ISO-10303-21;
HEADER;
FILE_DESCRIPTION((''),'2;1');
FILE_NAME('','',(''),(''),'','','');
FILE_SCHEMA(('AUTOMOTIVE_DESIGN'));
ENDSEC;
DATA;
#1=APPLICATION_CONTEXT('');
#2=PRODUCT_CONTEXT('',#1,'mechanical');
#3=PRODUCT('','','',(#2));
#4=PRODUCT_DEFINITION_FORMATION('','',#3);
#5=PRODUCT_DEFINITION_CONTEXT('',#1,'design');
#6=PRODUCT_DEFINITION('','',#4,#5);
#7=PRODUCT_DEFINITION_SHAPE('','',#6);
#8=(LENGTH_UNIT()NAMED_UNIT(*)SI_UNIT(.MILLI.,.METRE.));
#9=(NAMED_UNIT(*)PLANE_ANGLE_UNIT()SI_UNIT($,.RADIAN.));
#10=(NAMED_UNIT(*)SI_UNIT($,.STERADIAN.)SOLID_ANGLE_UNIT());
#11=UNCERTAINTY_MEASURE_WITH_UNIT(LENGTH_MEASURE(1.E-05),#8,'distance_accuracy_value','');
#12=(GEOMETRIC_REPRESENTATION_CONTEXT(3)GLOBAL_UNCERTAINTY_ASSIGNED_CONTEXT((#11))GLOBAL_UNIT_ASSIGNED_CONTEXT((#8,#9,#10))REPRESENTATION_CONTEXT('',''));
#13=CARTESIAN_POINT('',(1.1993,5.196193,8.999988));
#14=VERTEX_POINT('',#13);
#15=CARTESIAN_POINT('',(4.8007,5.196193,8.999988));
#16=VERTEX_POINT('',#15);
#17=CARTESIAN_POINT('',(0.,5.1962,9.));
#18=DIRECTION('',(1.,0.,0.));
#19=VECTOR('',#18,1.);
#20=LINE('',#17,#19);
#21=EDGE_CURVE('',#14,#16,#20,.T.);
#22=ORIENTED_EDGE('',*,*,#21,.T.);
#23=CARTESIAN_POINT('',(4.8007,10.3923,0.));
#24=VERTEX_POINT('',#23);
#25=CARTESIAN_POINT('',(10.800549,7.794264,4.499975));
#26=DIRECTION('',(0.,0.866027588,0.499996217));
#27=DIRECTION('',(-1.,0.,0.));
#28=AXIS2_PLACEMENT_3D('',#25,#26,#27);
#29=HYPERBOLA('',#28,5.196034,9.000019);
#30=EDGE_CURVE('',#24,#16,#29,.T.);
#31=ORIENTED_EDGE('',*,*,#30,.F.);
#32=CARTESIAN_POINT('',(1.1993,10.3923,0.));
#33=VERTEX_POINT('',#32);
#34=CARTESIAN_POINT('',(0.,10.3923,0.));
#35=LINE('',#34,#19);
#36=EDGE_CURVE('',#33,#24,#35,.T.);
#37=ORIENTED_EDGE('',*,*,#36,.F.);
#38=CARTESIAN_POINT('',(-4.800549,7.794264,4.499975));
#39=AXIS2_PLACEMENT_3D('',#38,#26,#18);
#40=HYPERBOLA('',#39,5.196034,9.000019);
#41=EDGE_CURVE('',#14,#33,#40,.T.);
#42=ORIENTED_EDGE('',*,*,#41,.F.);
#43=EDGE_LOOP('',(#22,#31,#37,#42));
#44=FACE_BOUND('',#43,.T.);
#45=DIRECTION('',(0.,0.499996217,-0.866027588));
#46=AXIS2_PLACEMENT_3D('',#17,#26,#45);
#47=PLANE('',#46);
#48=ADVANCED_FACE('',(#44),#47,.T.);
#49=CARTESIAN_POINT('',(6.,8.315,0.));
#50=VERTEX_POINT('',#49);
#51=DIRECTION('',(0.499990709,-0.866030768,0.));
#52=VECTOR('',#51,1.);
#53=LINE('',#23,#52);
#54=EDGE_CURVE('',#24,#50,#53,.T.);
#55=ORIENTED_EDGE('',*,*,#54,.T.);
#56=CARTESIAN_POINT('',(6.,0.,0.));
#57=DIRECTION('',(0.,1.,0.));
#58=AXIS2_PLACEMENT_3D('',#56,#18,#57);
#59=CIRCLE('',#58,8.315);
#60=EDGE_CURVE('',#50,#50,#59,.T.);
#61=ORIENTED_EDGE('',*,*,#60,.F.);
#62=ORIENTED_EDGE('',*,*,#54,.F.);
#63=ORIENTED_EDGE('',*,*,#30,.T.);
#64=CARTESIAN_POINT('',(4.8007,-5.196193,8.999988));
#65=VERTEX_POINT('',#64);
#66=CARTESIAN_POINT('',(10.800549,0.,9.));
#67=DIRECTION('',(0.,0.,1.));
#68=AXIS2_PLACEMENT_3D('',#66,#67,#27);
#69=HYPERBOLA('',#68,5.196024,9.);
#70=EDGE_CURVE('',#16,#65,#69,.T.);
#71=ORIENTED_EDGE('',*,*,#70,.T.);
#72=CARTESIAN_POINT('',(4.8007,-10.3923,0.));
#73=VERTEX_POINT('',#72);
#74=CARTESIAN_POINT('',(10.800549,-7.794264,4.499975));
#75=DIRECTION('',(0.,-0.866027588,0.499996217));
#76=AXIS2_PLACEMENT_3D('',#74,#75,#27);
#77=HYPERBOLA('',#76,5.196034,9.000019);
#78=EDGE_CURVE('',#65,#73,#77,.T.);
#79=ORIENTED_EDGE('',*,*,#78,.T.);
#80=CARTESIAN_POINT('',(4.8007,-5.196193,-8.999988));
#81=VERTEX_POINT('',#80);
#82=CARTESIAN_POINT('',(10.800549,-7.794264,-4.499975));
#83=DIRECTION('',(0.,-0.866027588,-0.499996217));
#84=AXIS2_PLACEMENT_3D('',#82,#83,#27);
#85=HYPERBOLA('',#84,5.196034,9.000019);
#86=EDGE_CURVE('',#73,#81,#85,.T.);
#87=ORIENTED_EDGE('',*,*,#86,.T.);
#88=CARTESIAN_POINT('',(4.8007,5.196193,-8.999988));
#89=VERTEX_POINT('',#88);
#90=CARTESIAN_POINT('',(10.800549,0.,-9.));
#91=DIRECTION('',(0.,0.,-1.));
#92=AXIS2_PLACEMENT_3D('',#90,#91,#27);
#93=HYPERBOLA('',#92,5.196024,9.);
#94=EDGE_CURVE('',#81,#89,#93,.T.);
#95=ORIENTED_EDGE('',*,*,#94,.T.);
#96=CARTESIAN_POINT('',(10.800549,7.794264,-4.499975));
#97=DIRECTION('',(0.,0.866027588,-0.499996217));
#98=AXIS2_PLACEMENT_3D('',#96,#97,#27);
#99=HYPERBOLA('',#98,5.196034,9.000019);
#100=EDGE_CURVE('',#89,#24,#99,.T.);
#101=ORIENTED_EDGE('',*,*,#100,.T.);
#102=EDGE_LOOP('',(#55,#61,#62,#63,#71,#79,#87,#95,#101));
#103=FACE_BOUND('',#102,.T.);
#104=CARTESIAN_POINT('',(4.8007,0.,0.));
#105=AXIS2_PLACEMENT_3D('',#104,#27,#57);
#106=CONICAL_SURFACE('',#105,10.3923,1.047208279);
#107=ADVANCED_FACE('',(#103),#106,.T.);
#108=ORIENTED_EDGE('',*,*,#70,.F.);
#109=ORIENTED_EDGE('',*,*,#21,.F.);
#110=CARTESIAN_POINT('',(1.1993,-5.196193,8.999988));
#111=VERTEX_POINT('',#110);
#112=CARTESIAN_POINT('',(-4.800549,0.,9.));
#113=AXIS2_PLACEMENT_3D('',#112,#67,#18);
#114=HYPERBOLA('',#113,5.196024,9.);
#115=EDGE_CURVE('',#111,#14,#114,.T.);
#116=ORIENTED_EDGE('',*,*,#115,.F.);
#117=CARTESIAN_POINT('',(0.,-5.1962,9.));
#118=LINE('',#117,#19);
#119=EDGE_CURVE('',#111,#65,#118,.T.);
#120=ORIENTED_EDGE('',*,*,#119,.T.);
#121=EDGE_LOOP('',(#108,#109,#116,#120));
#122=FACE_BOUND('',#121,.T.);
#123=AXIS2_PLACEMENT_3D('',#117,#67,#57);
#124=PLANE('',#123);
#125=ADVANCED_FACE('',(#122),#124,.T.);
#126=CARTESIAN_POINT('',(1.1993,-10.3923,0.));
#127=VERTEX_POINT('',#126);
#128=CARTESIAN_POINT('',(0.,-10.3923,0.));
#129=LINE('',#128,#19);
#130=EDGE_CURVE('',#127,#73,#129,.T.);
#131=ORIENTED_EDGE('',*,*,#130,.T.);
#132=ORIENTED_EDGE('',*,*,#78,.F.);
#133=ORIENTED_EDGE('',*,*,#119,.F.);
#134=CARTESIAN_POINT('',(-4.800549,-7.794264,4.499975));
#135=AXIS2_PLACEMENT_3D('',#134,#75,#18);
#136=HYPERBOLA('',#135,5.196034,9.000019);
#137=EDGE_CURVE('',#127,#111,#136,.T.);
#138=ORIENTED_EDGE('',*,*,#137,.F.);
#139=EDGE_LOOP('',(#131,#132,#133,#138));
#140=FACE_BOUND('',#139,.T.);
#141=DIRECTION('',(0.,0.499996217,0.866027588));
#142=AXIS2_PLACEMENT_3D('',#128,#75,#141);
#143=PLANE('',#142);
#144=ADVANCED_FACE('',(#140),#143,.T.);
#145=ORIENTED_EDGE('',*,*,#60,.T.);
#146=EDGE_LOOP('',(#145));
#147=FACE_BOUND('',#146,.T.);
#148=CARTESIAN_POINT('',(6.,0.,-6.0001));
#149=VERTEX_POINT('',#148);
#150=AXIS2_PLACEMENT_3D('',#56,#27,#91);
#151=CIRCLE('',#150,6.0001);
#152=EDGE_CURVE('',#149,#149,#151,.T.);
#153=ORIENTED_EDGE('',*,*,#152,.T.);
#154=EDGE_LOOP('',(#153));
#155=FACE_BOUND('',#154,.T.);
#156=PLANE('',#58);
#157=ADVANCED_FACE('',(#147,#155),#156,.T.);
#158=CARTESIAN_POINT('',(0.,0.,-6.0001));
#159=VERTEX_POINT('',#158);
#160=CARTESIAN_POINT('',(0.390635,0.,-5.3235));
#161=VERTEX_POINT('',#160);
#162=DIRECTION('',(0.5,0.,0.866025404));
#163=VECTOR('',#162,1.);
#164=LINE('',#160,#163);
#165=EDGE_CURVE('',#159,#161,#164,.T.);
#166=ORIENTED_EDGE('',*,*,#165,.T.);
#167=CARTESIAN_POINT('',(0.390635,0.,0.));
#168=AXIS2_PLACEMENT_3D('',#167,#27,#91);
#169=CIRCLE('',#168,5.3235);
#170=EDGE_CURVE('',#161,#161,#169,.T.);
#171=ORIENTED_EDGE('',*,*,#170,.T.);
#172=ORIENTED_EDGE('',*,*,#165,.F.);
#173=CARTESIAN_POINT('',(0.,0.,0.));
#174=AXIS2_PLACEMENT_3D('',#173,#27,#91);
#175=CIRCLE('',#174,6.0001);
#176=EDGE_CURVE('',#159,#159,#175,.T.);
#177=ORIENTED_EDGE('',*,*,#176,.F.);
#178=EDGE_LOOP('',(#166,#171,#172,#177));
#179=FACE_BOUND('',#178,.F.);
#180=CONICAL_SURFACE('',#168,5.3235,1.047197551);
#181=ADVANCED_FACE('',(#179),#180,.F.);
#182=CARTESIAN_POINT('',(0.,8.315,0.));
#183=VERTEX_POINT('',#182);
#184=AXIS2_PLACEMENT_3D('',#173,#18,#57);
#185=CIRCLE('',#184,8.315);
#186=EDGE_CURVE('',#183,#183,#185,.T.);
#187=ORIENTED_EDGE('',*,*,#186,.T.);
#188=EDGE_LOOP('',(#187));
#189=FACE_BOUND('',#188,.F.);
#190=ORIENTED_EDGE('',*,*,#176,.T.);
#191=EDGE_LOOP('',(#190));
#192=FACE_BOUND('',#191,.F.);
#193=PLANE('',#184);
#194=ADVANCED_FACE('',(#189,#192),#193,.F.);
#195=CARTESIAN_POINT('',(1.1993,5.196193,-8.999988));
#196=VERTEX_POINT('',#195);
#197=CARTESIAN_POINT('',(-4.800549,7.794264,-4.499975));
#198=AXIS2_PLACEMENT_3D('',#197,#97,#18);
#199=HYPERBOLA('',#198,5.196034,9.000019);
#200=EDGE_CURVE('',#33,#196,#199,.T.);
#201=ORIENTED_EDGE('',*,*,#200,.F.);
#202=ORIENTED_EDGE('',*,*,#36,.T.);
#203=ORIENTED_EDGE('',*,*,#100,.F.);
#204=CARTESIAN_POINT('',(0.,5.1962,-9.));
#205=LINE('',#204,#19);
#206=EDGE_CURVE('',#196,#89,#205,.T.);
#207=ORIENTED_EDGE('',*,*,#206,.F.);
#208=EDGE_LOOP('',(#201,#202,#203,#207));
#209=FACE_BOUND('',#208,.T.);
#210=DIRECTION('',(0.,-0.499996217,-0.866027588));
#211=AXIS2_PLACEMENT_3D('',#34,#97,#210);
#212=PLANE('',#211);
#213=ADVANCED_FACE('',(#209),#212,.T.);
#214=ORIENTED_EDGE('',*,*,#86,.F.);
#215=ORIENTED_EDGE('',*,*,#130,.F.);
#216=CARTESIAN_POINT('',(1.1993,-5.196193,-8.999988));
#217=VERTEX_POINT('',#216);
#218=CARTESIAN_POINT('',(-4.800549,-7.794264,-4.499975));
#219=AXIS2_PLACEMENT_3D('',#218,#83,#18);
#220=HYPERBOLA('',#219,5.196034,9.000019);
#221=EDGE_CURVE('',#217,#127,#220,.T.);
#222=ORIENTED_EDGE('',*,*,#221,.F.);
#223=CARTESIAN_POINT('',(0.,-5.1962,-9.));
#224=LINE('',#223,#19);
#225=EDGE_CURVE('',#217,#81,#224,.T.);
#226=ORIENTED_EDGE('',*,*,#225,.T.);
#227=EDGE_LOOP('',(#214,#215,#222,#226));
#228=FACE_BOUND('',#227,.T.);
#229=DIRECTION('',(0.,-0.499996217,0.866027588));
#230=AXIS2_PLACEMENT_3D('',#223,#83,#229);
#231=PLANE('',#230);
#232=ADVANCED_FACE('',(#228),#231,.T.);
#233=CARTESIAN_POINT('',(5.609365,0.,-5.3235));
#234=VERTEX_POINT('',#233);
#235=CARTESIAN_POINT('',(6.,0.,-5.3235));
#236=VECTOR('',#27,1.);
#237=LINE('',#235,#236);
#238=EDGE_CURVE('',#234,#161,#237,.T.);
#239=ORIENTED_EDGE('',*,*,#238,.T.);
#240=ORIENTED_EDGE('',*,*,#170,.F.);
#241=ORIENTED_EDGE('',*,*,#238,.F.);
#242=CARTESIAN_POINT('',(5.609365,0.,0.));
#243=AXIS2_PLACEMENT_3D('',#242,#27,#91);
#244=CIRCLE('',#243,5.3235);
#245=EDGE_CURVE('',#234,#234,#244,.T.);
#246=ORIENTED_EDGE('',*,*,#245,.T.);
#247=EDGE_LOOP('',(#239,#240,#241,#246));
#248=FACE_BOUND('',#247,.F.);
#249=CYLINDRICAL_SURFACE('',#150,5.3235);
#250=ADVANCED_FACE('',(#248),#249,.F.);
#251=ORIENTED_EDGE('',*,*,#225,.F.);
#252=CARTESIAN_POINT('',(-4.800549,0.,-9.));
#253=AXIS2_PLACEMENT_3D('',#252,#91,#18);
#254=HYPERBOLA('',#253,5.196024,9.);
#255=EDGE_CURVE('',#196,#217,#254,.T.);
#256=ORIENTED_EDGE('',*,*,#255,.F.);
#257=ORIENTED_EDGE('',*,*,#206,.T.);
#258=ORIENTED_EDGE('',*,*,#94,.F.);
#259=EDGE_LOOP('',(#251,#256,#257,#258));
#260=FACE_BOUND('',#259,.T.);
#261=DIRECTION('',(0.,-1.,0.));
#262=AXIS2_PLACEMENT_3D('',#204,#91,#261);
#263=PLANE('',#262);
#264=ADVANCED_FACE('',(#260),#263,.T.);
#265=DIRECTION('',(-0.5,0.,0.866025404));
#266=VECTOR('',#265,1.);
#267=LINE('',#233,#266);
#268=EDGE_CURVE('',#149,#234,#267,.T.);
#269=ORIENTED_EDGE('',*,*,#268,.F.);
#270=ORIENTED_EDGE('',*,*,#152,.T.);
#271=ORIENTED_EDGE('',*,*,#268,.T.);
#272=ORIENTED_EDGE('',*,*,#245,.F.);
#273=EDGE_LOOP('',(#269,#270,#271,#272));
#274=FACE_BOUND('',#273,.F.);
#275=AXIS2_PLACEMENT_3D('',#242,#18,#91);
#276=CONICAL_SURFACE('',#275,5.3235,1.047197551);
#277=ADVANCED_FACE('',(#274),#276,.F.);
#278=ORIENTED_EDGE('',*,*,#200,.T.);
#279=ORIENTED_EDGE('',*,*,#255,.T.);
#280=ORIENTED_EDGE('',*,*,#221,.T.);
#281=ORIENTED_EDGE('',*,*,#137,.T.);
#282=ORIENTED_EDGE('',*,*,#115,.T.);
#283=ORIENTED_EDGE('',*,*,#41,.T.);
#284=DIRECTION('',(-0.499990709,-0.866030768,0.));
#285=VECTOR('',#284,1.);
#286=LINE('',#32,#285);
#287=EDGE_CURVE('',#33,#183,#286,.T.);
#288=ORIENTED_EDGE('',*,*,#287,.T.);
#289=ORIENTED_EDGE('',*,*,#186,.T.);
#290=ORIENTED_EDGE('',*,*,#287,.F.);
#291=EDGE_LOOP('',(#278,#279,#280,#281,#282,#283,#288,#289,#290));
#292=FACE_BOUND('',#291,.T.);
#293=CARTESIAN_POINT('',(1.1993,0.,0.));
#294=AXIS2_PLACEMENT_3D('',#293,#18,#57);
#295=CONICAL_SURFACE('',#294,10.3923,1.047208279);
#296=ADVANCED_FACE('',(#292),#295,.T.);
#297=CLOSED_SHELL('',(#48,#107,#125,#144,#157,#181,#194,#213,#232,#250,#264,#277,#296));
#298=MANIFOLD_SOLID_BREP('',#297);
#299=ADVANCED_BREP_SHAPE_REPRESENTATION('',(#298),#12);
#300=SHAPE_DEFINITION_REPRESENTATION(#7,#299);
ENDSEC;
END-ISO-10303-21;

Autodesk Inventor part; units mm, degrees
ref_plane "YZ Plane" through (0, 0, 0) normal (1, 0, 0) x (0, 1, 0)
ref_plane "XZ Plane" through (0, 0, 0) normal (0, 1, 0) x (-1, 0, 0)
sketch "Skizze1" plane through (0, 0, 0) normal (1, 0, 0) x (0, 1, 0)
  line L0 (-10.3923, 0) -> (-5.1962, 9)
  line L1 (-5.1962, 9) -> (5.1962, 9)
  line L2 (5.1962, 9) -> (10.3923, 0)
  line L3 (10.3923, 0) -> (5.1962, -9)
  line L4 (5.1962, -9) -> (-5.1962, -9)
  line L5 (-5.1962, -9) -> (-10.3923, 0)
  point P0 (0, 0)
  point P1 (0, 0)
  dimension "d0" = 20.7846
extrude "Körper" add sketch "Skizze1" along normal blind 6
sketch "Skizze2" plane through (0, 0, 0) normal (0, 0, 1) x (1, 0, 0)
  line L0 (0, 5.1962) -> (0, 10.3923) projected
  line L1 (0, 10.3923) -> (6, 10.3923) projected
  line L2 (6, 5.1962) -> (6, 10.3923) projected
  line L3 (-1.2, 0) -> (7.2, 0) projected
  line L4 (1.1993, 10.3923) -> (0, 8.315)
  line L5 (4.8007, 10.3923) -> (6, 8.315)
  dimension "d3" = 30
  dimension "d4" = 30
  dimension "d5" = 16.63
  dimension "d6" = 16.63
revolve "Fase1" cut sketch "Skizze2" angle 360 about axis through (-10, 0, 0) along (1, 0, 0)
sketch "Skizze3" plane through (6, 0, 0) normal (1, 0, 0) x (0, 0, -1)
  arc A0 (-0.625, -1.0825) -> (0.625, -1.0825) centre (0, 0) ccw projected
hole "Gewinde" at (6, 0, 0) direction (-1, 0, 0) diameter 10.647 end through all thread size "M12x1.25" class "6H" standard "ISO Metric profile"
chamfer "Fase2" distance 0.6766 angle 30 1 edges at (6, 0, 5.3235) measured on face at (6, 7.2244, -0.8772)
chamfer "Fase3" distance 0.6766 angle 30 1 edges at (0, 0, 5.3235) measured on face at (0, 7.2244, -0.8772)
ref_plane "Work Plane1" through (-22.2768, 0, 0) normal (0, -0.8660254, -0.5) x (1, 0, 0)
equation "\"d0\" = 1.1547 * SW"
equation "\"d1\" = KOH"
equation "\"d3\" = ANG1"
equation "\"d4\" = ANG2"
equation "\"d5\" = SW0"
equation "\"d6\" = SW01"
equation "\"d8\" = -0.5 * GD1 + 0.5 * NND"
equation "\"d40\" = -0.5 * GD1 + 0.5 * NND"
equation "\"d10\" = -0.5 * GD1 + 0.5 * NND"
equation "\"d41\" = -0.5 * GD1 + 0.5 * NND"
equation "\"ANG1\" = 30deg"
equation "\"ANG2\" = 30deg"
equation "\"NND\" = 12"
equation "\"KOH\" = 6"
equation "\"SW\" = 18"
equation "\"SW0\" = 16.63"
equation "\"SW01\" = SW0"
equation "\"GUL\" = 0.541266 * PTC"
equation "\"THREADDIA\" = 12"
equation "\"TOA\" = 30deg"
equation "\"PTC\" = 1.25"
equation "\"E0\" = 20.03"
equation "\"GAL\" = 0.541266 * PTC"
equation "\"GD1\" = 10.646835"
properties part number "ISO 8675 - M12 x 1,25" material "Edelstahl, 440C"
